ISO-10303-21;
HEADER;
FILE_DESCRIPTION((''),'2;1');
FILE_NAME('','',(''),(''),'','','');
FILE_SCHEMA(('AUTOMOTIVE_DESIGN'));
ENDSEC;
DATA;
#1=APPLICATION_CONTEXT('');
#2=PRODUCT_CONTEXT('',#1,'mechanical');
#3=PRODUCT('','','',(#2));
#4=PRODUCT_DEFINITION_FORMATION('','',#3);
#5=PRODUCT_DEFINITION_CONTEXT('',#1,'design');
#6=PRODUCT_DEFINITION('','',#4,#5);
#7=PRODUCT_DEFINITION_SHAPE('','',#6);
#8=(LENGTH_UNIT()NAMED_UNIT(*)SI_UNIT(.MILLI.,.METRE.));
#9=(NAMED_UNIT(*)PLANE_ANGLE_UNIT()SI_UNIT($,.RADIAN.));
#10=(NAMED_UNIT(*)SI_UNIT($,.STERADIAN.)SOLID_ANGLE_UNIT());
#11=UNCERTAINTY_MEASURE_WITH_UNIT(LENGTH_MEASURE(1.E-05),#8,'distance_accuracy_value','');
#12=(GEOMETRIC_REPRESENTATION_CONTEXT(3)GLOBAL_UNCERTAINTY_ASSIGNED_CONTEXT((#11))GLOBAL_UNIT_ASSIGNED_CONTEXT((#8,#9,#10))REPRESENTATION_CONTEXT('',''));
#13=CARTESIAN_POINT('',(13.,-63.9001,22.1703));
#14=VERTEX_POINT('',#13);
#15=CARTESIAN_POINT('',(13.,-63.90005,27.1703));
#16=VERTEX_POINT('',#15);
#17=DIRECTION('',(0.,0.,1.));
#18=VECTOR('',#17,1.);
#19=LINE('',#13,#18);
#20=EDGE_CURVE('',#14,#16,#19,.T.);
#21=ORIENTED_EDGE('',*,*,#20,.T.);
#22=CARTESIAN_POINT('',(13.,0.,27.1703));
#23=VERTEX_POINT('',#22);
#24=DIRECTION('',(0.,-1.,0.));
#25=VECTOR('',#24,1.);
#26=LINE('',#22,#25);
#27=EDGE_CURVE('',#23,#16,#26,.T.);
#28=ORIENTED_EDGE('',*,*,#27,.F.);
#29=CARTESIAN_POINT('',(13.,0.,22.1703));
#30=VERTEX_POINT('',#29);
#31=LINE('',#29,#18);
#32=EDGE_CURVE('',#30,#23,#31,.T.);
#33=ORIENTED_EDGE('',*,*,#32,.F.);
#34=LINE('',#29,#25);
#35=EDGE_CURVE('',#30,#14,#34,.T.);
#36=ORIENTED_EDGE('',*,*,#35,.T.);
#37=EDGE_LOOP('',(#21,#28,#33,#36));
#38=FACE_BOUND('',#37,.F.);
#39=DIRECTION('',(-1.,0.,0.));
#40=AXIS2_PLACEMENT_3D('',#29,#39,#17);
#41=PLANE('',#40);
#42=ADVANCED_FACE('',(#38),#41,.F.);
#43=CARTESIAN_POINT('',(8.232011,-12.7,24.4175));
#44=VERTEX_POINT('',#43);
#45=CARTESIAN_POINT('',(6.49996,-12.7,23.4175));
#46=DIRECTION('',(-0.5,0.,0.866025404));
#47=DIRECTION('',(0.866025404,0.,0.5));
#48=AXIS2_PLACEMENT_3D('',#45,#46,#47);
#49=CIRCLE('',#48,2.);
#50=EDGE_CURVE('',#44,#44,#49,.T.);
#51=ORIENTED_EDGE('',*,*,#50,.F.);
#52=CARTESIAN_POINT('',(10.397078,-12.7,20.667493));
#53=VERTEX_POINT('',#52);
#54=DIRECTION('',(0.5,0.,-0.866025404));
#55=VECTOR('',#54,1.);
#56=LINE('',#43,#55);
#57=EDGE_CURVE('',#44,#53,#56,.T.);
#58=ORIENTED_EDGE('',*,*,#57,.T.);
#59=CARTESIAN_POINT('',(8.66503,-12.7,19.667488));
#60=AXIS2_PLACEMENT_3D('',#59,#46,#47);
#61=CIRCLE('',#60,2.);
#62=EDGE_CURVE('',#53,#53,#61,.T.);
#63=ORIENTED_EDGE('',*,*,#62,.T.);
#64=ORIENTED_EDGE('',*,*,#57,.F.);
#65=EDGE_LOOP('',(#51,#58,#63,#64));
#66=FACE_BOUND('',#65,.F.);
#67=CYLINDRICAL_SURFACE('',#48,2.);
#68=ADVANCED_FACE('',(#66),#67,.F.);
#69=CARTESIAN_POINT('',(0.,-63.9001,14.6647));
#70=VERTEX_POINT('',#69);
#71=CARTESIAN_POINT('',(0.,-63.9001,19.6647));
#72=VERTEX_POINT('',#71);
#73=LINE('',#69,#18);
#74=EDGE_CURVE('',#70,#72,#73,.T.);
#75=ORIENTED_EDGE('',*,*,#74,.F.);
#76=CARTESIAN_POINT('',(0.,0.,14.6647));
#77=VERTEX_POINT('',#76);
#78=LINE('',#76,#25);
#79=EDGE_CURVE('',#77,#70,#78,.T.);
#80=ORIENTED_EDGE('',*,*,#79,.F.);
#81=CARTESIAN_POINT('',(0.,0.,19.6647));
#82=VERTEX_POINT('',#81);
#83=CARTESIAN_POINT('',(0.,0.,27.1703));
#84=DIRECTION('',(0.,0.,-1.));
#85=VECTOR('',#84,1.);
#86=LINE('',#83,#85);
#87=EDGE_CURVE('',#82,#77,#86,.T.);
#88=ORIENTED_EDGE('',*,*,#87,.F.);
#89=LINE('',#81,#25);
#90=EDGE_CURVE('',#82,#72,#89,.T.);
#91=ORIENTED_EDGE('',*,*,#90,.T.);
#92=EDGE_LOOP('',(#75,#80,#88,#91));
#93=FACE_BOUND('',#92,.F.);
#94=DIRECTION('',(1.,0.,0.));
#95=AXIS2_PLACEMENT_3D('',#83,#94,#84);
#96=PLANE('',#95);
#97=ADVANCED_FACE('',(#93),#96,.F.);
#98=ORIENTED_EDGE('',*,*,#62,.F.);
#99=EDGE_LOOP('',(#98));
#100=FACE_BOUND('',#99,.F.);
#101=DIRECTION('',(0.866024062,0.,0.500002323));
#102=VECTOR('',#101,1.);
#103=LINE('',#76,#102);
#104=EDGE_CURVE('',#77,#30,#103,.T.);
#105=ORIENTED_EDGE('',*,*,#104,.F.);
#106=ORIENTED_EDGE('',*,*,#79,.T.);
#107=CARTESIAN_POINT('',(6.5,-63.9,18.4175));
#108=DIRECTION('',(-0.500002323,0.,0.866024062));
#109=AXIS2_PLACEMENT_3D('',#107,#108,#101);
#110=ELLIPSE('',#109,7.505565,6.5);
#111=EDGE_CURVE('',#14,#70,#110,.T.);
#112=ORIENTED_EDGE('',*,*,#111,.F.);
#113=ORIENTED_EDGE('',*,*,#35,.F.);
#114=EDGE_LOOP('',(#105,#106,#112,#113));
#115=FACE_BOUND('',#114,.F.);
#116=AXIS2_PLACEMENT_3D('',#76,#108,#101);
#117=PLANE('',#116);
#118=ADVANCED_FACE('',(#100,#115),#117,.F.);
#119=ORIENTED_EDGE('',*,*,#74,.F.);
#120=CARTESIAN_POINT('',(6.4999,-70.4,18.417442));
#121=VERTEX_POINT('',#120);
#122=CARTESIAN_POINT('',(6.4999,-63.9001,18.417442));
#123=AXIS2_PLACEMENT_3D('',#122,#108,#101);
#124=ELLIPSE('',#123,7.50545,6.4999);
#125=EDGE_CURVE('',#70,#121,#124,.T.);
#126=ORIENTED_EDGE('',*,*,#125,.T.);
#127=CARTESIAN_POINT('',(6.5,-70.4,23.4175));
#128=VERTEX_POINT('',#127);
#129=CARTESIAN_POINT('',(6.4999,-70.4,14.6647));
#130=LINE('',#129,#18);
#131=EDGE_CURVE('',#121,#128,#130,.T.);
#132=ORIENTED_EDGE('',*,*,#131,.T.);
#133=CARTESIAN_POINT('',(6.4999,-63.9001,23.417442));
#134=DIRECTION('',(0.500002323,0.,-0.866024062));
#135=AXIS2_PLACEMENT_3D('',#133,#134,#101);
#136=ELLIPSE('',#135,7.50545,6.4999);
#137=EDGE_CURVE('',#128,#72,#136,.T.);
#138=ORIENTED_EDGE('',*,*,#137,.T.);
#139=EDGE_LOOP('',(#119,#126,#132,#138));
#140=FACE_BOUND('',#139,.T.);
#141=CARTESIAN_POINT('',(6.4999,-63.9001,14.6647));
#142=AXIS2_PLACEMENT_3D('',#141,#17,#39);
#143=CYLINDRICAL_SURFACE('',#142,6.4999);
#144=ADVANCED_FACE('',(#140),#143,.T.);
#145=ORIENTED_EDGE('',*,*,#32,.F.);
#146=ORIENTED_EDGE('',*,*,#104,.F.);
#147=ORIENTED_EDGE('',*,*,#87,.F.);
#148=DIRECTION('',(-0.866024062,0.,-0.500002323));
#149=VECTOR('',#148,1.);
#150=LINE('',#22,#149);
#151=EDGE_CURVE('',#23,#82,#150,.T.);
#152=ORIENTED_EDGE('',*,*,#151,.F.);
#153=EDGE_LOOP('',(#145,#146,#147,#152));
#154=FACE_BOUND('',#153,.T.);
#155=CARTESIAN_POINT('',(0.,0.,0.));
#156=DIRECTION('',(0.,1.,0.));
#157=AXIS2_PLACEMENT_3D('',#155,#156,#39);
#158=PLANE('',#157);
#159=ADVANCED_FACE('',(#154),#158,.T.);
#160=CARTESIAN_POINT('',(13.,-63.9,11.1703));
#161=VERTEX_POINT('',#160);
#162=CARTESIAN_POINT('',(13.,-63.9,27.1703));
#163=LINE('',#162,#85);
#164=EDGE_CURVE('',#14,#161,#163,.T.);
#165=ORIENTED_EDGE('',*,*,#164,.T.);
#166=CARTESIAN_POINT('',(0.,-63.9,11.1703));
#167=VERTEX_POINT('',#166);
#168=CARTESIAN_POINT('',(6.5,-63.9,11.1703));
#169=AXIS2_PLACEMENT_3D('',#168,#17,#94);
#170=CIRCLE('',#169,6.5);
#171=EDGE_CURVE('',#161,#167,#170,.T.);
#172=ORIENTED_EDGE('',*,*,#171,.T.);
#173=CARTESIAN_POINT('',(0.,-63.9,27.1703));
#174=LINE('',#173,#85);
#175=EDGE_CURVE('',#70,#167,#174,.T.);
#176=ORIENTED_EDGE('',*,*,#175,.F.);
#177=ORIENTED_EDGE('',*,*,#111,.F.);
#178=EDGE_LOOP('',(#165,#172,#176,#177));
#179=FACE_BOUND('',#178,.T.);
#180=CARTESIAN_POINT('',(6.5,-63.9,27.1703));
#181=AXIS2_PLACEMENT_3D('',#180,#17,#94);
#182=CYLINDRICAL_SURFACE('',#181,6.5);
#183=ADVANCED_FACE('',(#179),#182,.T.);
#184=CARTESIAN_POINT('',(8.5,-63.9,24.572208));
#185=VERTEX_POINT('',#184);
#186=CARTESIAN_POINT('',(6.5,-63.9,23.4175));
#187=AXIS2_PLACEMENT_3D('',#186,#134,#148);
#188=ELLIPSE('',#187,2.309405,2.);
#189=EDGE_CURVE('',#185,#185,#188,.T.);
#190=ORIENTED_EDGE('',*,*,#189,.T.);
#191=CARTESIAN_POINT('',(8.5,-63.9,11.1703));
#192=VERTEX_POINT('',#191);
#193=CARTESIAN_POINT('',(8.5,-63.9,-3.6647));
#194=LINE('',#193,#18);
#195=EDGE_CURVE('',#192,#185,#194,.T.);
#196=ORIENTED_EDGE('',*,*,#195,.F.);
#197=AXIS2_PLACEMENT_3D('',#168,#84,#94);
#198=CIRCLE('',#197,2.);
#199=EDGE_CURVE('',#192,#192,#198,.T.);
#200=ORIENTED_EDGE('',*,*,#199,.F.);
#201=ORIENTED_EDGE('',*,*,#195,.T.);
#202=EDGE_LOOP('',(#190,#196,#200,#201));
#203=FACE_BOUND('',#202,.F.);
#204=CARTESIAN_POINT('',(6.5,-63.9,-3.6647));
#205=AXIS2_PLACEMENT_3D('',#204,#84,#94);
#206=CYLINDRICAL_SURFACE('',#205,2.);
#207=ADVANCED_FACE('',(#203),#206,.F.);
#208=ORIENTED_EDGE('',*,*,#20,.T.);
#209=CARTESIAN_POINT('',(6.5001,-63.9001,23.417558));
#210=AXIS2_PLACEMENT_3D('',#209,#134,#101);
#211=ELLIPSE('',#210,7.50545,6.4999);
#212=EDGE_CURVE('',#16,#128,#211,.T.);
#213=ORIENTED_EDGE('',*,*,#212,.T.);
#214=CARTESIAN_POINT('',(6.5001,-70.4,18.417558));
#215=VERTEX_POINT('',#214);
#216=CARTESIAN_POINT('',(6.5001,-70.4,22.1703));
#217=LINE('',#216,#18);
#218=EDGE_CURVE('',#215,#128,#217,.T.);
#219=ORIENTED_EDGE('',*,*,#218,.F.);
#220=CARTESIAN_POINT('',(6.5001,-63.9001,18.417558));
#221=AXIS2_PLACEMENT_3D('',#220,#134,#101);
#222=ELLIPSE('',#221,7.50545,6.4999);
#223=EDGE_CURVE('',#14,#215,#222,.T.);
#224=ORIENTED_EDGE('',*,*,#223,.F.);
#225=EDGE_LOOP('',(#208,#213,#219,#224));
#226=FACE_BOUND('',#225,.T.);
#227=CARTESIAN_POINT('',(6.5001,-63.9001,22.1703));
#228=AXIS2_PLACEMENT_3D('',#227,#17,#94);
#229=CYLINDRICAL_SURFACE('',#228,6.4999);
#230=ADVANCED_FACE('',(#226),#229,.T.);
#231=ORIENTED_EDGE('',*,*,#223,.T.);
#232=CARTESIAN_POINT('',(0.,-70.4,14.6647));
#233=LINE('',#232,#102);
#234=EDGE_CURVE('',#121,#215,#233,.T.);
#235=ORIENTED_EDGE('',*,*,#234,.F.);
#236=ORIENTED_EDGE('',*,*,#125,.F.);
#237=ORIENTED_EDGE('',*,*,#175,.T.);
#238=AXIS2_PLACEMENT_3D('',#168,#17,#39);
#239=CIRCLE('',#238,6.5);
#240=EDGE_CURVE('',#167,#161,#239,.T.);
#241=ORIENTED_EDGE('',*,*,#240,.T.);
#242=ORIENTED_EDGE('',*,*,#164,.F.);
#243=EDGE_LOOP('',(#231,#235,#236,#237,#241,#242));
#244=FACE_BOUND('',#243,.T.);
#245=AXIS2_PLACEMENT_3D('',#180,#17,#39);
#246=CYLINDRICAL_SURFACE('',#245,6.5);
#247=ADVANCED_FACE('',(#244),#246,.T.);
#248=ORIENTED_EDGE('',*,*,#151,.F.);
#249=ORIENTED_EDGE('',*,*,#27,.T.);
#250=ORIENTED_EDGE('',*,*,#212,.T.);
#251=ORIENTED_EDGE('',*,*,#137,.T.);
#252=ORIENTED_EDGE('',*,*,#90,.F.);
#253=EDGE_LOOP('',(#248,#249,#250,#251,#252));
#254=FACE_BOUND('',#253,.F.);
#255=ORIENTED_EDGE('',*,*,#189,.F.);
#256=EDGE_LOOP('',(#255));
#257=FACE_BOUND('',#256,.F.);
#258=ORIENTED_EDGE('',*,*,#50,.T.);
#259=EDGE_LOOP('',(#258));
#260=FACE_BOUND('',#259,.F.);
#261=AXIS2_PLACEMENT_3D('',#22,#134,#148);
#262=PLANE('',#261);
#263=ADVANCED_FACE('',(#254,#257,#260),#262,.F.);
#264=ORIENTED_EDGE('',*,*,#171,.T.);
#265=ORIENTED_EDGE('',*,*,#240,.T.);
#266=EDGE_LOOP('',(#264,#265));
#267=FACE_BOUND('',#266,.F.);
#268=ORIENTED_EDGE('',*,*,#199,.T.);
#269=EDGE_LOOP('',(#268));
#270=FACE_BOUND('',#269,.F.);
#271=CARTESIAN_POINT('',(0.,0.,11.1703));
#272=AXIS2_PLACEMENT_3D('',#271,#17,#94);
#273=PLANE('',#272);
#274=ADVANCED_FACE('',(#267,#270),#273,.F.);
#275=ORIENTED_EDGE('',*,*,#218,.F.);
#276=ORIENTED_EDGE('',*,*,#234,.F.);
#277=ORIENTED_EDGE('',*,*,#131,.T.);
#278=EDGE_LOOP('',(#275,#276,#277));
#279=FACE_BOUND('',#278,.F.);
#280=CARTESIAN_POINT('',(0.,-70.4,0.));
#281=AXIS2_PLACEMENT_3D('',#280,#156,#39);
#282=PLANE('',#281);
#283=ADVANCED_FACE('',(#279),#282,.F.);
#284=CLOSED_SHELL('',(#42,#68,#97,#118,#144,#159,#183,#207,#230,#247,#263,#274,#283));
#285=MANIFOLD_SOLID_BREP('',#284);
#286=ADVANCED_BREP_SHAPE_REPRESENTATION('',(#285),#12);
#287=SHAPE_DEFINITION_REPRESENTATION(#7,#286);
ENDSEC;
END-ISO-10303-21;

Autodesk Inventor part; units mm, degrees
ref_plane "YZ Plane" through (0, 0, 0) normal (1, 0, 0) x (0, 1, 0)
ref_plane "XZ Plane" through (0, 0, 0) normal (0, 1, 0) x (-1, 0, 0)
ref_plane "XY Plane" through (0, 0, 0) normal (0, 0, 1) x (1, 0, 0)
sketch "Sketch1" plane through (0, 0, 0) normal (0, 1, 0) x (-1, 0, 0)
  line L0 (0, 14.6647) -> (-13, 22.1703)
  line L1 (0, 14.6647) -> (15.0111, 14.6647) construction
  line L2 (-13, 22.1703) -> (-13, 27.1703)
  line L3 (0, 19.6647) -> (0, 14.6647)
  line L4 (0, 0) -> (-28.4468, 0) construction
  line L5 (-13, -7.1591) -> (0, -14.6647)
  line L6 (0, -14.6647) -> (0, -19.6647)
  line L7 (-13, 27.1703) -> (0, 27.1703)
  line L8 (0, 27.1703) -> (0, 19.6647)
  line L9 (0, -19.6647) -> (-13, -19.6647)
  line L10 (-13, -19.6647) -> (-13, -7.1591)
  point P0 (0, -12.7)
  dimension "d1" = 150
  dimension "d2" = 5
  dimension "d5" = 25.4
  dimension "d6" = 0
  dimension "d7" = 0
  dimension "d8" = 14.6647
  dimension "d9" = 13
  dimension "d10" = 13
  dimension "d11" = 5
extrude "Extrusion1" add sketch "Sketch1" against normal blind 70.4
fillet "Fillet1" radius 6.5 4 edges at (0, -70.4, 20.9175) (13, -70.4, 24.6703) (13, -70.4, -13.4119) (0, -70.4, -17.1647)
sketch "Sketch2" plane through (0, 0, 27.1703) normal (0, 0, 1) x (1, 0, 0)
  arc A0 (0, -63.9) -> (13, -63.9) centre (6.5, -63.9) ccw projected
  line L0 (0, -63.9) -> (0, 0) projected
  line L1 (0, 0) -> (13, 0) projected
  line L2 (13, 0) -> (13, -63.9) projected
  circle A1 centre (6.5, -63.9) radius 6.5
extrude "Extrusion2" add sketch "Sketch2" against normal blind 16 contours A1 A0
sketch "Sketch3" plane through (13, 0, -19.6647) normal (0, 0, -1) x (-1, 0, 0)
  arc A0 (0, -63.9) -> (13, -63.9) centre (6.5, -63.9) ccw projected
  line L0 (0, -63.9) -> (0, 0) projected
  line L1 (0, 0) -> (13, 0) projected
  line L2 (13, 0) -> (13, -63.9) projected
  circle A1 centre (6.5, -63.9) radius 6.5
extrude "Extrusion3" add sketch "Sketch3" against normal blind 16 contours A1 A0
sketch "Sketch4" plane through (0, 0, 0) normal (0, 1, 0) x (1, 0, 0)
  line L0 (0, -14.6647) -> (13, -22.1703) projected
  line L1 (13, -22.1703) -> (13, -27.1703) projected
  line L2 (13, -27.1703) -> (0, -27.1703) projected
  line L3 (0, -27.1703) -> (0, -14.6647) projected
  line L4 (13, 7.1591) -> (0, 14.6647) projected
  line L5 (0, 14.6647) -> (0, 19.6647) projected
  line L6 (0, 19.6647) -> (13, 19.6647) projected
  line L7 (13, 19.6647) -> (13, 7.1591) projected
  line L8 (13, -27.1703) -> (0, -19.6647)
  line L9 (13, -27.1703) -> (28.0111, -27.1703) construction
  line L10 (0, 19.6647) -> (13, 12.1591)
  point P0 (0, 0)
  dimension "d19" = 150
extrude "Extrusion4" cut sketch "Sketch4" against normal through all contours L8 L2 L3 | L10 L6 L7
sketch "Sketch5" plane through (13, -63.9, 27.1703) normal (-0.5, 0, 0.8660254) x (0.8660254, 0, 0.5)
  ellipse E0 centre (-7.5056, 0) end of major axis (-15.0111, 0) minor radius 6.5 (-15.0111, 0) -> (0, 0) ccw projected
  line L0 (-15.0111, 0) -> (-15.0111, 63.9) projected
  line L1 (-15.0111, 63.9) -> (0, 63.9) projected
  line L2 (0, 63.9) -> (0, 0) projected
  circle A0 centre (-7.5056, 51.2) radius 2
  point P0 (-24.8435, 63.9)
  dimension "d22" = 4
  dimension "d23" = 12.7
extrude "Extrusion5" cut sketch "Sketch5" against normal up to next contours A0
sketch "Sketch6" plane through (0, -63.9, -19.6647) normal (0.5, 0, -0.8660254) x (-0.8660254, 0, -0.5)
  ellipse E0 centre (-7.5056, 0) end of major axis (-15.0111, 0) minor radius 6.5 (-15.0111, 0) -> (0, 0) ccw projected
  line L0 (-15.0111, 0) -> (-15.0111, 63.9) projected
  line L1 (-15.0111, 63.9) -> (0, 63.9) projected
  line L2 (0, 63.9) -> (0, 0) projected
  circle A0 centre (-7.5056, 51.2) radius 2
  point P0 (-9.8323, 63.9)
  dimension "d26" = 4
  dimension "d27" = 12.7
extrude "Extrusion6" cut sketch "Sketch6" against normal up to next contours A0
sketch "Sketch7" plane through (6.5, -63.9, -3.6647) normal (0, 0, 1) x (1, 0, 0)
  circle A0 centre (0, 0) radius 6.5 projected
  circle A1 centre (0, 0) radius 2
  point P0 (-6.5, 63.9)
  dimension "d30" = 4
extrude "Extrusion7" cut sketch "Sketch7" along normal through all both and the other way through all contours A1
sketch "Sketch9" plane through (0, 0, 0) normal (0, 1, 0) x (1, 0, 0)
  line L0 (-2.3389, 1.3365) -> (18.6443, 1.3365)
  line L1 (18.6443, 1.3365) -> (18.6443, 23.2553)
  line L2 (18.6443, 23.2553) -> (-2.3389, 23.2553)
  line L3 (-2.3389, 23.2553) -> (-2.3389, 1.3365)
  point P0 (0, 0)
extrude "Extrusion8" cut sketch "Sketch9" against normal through all
properties part number "terminal_mount"
